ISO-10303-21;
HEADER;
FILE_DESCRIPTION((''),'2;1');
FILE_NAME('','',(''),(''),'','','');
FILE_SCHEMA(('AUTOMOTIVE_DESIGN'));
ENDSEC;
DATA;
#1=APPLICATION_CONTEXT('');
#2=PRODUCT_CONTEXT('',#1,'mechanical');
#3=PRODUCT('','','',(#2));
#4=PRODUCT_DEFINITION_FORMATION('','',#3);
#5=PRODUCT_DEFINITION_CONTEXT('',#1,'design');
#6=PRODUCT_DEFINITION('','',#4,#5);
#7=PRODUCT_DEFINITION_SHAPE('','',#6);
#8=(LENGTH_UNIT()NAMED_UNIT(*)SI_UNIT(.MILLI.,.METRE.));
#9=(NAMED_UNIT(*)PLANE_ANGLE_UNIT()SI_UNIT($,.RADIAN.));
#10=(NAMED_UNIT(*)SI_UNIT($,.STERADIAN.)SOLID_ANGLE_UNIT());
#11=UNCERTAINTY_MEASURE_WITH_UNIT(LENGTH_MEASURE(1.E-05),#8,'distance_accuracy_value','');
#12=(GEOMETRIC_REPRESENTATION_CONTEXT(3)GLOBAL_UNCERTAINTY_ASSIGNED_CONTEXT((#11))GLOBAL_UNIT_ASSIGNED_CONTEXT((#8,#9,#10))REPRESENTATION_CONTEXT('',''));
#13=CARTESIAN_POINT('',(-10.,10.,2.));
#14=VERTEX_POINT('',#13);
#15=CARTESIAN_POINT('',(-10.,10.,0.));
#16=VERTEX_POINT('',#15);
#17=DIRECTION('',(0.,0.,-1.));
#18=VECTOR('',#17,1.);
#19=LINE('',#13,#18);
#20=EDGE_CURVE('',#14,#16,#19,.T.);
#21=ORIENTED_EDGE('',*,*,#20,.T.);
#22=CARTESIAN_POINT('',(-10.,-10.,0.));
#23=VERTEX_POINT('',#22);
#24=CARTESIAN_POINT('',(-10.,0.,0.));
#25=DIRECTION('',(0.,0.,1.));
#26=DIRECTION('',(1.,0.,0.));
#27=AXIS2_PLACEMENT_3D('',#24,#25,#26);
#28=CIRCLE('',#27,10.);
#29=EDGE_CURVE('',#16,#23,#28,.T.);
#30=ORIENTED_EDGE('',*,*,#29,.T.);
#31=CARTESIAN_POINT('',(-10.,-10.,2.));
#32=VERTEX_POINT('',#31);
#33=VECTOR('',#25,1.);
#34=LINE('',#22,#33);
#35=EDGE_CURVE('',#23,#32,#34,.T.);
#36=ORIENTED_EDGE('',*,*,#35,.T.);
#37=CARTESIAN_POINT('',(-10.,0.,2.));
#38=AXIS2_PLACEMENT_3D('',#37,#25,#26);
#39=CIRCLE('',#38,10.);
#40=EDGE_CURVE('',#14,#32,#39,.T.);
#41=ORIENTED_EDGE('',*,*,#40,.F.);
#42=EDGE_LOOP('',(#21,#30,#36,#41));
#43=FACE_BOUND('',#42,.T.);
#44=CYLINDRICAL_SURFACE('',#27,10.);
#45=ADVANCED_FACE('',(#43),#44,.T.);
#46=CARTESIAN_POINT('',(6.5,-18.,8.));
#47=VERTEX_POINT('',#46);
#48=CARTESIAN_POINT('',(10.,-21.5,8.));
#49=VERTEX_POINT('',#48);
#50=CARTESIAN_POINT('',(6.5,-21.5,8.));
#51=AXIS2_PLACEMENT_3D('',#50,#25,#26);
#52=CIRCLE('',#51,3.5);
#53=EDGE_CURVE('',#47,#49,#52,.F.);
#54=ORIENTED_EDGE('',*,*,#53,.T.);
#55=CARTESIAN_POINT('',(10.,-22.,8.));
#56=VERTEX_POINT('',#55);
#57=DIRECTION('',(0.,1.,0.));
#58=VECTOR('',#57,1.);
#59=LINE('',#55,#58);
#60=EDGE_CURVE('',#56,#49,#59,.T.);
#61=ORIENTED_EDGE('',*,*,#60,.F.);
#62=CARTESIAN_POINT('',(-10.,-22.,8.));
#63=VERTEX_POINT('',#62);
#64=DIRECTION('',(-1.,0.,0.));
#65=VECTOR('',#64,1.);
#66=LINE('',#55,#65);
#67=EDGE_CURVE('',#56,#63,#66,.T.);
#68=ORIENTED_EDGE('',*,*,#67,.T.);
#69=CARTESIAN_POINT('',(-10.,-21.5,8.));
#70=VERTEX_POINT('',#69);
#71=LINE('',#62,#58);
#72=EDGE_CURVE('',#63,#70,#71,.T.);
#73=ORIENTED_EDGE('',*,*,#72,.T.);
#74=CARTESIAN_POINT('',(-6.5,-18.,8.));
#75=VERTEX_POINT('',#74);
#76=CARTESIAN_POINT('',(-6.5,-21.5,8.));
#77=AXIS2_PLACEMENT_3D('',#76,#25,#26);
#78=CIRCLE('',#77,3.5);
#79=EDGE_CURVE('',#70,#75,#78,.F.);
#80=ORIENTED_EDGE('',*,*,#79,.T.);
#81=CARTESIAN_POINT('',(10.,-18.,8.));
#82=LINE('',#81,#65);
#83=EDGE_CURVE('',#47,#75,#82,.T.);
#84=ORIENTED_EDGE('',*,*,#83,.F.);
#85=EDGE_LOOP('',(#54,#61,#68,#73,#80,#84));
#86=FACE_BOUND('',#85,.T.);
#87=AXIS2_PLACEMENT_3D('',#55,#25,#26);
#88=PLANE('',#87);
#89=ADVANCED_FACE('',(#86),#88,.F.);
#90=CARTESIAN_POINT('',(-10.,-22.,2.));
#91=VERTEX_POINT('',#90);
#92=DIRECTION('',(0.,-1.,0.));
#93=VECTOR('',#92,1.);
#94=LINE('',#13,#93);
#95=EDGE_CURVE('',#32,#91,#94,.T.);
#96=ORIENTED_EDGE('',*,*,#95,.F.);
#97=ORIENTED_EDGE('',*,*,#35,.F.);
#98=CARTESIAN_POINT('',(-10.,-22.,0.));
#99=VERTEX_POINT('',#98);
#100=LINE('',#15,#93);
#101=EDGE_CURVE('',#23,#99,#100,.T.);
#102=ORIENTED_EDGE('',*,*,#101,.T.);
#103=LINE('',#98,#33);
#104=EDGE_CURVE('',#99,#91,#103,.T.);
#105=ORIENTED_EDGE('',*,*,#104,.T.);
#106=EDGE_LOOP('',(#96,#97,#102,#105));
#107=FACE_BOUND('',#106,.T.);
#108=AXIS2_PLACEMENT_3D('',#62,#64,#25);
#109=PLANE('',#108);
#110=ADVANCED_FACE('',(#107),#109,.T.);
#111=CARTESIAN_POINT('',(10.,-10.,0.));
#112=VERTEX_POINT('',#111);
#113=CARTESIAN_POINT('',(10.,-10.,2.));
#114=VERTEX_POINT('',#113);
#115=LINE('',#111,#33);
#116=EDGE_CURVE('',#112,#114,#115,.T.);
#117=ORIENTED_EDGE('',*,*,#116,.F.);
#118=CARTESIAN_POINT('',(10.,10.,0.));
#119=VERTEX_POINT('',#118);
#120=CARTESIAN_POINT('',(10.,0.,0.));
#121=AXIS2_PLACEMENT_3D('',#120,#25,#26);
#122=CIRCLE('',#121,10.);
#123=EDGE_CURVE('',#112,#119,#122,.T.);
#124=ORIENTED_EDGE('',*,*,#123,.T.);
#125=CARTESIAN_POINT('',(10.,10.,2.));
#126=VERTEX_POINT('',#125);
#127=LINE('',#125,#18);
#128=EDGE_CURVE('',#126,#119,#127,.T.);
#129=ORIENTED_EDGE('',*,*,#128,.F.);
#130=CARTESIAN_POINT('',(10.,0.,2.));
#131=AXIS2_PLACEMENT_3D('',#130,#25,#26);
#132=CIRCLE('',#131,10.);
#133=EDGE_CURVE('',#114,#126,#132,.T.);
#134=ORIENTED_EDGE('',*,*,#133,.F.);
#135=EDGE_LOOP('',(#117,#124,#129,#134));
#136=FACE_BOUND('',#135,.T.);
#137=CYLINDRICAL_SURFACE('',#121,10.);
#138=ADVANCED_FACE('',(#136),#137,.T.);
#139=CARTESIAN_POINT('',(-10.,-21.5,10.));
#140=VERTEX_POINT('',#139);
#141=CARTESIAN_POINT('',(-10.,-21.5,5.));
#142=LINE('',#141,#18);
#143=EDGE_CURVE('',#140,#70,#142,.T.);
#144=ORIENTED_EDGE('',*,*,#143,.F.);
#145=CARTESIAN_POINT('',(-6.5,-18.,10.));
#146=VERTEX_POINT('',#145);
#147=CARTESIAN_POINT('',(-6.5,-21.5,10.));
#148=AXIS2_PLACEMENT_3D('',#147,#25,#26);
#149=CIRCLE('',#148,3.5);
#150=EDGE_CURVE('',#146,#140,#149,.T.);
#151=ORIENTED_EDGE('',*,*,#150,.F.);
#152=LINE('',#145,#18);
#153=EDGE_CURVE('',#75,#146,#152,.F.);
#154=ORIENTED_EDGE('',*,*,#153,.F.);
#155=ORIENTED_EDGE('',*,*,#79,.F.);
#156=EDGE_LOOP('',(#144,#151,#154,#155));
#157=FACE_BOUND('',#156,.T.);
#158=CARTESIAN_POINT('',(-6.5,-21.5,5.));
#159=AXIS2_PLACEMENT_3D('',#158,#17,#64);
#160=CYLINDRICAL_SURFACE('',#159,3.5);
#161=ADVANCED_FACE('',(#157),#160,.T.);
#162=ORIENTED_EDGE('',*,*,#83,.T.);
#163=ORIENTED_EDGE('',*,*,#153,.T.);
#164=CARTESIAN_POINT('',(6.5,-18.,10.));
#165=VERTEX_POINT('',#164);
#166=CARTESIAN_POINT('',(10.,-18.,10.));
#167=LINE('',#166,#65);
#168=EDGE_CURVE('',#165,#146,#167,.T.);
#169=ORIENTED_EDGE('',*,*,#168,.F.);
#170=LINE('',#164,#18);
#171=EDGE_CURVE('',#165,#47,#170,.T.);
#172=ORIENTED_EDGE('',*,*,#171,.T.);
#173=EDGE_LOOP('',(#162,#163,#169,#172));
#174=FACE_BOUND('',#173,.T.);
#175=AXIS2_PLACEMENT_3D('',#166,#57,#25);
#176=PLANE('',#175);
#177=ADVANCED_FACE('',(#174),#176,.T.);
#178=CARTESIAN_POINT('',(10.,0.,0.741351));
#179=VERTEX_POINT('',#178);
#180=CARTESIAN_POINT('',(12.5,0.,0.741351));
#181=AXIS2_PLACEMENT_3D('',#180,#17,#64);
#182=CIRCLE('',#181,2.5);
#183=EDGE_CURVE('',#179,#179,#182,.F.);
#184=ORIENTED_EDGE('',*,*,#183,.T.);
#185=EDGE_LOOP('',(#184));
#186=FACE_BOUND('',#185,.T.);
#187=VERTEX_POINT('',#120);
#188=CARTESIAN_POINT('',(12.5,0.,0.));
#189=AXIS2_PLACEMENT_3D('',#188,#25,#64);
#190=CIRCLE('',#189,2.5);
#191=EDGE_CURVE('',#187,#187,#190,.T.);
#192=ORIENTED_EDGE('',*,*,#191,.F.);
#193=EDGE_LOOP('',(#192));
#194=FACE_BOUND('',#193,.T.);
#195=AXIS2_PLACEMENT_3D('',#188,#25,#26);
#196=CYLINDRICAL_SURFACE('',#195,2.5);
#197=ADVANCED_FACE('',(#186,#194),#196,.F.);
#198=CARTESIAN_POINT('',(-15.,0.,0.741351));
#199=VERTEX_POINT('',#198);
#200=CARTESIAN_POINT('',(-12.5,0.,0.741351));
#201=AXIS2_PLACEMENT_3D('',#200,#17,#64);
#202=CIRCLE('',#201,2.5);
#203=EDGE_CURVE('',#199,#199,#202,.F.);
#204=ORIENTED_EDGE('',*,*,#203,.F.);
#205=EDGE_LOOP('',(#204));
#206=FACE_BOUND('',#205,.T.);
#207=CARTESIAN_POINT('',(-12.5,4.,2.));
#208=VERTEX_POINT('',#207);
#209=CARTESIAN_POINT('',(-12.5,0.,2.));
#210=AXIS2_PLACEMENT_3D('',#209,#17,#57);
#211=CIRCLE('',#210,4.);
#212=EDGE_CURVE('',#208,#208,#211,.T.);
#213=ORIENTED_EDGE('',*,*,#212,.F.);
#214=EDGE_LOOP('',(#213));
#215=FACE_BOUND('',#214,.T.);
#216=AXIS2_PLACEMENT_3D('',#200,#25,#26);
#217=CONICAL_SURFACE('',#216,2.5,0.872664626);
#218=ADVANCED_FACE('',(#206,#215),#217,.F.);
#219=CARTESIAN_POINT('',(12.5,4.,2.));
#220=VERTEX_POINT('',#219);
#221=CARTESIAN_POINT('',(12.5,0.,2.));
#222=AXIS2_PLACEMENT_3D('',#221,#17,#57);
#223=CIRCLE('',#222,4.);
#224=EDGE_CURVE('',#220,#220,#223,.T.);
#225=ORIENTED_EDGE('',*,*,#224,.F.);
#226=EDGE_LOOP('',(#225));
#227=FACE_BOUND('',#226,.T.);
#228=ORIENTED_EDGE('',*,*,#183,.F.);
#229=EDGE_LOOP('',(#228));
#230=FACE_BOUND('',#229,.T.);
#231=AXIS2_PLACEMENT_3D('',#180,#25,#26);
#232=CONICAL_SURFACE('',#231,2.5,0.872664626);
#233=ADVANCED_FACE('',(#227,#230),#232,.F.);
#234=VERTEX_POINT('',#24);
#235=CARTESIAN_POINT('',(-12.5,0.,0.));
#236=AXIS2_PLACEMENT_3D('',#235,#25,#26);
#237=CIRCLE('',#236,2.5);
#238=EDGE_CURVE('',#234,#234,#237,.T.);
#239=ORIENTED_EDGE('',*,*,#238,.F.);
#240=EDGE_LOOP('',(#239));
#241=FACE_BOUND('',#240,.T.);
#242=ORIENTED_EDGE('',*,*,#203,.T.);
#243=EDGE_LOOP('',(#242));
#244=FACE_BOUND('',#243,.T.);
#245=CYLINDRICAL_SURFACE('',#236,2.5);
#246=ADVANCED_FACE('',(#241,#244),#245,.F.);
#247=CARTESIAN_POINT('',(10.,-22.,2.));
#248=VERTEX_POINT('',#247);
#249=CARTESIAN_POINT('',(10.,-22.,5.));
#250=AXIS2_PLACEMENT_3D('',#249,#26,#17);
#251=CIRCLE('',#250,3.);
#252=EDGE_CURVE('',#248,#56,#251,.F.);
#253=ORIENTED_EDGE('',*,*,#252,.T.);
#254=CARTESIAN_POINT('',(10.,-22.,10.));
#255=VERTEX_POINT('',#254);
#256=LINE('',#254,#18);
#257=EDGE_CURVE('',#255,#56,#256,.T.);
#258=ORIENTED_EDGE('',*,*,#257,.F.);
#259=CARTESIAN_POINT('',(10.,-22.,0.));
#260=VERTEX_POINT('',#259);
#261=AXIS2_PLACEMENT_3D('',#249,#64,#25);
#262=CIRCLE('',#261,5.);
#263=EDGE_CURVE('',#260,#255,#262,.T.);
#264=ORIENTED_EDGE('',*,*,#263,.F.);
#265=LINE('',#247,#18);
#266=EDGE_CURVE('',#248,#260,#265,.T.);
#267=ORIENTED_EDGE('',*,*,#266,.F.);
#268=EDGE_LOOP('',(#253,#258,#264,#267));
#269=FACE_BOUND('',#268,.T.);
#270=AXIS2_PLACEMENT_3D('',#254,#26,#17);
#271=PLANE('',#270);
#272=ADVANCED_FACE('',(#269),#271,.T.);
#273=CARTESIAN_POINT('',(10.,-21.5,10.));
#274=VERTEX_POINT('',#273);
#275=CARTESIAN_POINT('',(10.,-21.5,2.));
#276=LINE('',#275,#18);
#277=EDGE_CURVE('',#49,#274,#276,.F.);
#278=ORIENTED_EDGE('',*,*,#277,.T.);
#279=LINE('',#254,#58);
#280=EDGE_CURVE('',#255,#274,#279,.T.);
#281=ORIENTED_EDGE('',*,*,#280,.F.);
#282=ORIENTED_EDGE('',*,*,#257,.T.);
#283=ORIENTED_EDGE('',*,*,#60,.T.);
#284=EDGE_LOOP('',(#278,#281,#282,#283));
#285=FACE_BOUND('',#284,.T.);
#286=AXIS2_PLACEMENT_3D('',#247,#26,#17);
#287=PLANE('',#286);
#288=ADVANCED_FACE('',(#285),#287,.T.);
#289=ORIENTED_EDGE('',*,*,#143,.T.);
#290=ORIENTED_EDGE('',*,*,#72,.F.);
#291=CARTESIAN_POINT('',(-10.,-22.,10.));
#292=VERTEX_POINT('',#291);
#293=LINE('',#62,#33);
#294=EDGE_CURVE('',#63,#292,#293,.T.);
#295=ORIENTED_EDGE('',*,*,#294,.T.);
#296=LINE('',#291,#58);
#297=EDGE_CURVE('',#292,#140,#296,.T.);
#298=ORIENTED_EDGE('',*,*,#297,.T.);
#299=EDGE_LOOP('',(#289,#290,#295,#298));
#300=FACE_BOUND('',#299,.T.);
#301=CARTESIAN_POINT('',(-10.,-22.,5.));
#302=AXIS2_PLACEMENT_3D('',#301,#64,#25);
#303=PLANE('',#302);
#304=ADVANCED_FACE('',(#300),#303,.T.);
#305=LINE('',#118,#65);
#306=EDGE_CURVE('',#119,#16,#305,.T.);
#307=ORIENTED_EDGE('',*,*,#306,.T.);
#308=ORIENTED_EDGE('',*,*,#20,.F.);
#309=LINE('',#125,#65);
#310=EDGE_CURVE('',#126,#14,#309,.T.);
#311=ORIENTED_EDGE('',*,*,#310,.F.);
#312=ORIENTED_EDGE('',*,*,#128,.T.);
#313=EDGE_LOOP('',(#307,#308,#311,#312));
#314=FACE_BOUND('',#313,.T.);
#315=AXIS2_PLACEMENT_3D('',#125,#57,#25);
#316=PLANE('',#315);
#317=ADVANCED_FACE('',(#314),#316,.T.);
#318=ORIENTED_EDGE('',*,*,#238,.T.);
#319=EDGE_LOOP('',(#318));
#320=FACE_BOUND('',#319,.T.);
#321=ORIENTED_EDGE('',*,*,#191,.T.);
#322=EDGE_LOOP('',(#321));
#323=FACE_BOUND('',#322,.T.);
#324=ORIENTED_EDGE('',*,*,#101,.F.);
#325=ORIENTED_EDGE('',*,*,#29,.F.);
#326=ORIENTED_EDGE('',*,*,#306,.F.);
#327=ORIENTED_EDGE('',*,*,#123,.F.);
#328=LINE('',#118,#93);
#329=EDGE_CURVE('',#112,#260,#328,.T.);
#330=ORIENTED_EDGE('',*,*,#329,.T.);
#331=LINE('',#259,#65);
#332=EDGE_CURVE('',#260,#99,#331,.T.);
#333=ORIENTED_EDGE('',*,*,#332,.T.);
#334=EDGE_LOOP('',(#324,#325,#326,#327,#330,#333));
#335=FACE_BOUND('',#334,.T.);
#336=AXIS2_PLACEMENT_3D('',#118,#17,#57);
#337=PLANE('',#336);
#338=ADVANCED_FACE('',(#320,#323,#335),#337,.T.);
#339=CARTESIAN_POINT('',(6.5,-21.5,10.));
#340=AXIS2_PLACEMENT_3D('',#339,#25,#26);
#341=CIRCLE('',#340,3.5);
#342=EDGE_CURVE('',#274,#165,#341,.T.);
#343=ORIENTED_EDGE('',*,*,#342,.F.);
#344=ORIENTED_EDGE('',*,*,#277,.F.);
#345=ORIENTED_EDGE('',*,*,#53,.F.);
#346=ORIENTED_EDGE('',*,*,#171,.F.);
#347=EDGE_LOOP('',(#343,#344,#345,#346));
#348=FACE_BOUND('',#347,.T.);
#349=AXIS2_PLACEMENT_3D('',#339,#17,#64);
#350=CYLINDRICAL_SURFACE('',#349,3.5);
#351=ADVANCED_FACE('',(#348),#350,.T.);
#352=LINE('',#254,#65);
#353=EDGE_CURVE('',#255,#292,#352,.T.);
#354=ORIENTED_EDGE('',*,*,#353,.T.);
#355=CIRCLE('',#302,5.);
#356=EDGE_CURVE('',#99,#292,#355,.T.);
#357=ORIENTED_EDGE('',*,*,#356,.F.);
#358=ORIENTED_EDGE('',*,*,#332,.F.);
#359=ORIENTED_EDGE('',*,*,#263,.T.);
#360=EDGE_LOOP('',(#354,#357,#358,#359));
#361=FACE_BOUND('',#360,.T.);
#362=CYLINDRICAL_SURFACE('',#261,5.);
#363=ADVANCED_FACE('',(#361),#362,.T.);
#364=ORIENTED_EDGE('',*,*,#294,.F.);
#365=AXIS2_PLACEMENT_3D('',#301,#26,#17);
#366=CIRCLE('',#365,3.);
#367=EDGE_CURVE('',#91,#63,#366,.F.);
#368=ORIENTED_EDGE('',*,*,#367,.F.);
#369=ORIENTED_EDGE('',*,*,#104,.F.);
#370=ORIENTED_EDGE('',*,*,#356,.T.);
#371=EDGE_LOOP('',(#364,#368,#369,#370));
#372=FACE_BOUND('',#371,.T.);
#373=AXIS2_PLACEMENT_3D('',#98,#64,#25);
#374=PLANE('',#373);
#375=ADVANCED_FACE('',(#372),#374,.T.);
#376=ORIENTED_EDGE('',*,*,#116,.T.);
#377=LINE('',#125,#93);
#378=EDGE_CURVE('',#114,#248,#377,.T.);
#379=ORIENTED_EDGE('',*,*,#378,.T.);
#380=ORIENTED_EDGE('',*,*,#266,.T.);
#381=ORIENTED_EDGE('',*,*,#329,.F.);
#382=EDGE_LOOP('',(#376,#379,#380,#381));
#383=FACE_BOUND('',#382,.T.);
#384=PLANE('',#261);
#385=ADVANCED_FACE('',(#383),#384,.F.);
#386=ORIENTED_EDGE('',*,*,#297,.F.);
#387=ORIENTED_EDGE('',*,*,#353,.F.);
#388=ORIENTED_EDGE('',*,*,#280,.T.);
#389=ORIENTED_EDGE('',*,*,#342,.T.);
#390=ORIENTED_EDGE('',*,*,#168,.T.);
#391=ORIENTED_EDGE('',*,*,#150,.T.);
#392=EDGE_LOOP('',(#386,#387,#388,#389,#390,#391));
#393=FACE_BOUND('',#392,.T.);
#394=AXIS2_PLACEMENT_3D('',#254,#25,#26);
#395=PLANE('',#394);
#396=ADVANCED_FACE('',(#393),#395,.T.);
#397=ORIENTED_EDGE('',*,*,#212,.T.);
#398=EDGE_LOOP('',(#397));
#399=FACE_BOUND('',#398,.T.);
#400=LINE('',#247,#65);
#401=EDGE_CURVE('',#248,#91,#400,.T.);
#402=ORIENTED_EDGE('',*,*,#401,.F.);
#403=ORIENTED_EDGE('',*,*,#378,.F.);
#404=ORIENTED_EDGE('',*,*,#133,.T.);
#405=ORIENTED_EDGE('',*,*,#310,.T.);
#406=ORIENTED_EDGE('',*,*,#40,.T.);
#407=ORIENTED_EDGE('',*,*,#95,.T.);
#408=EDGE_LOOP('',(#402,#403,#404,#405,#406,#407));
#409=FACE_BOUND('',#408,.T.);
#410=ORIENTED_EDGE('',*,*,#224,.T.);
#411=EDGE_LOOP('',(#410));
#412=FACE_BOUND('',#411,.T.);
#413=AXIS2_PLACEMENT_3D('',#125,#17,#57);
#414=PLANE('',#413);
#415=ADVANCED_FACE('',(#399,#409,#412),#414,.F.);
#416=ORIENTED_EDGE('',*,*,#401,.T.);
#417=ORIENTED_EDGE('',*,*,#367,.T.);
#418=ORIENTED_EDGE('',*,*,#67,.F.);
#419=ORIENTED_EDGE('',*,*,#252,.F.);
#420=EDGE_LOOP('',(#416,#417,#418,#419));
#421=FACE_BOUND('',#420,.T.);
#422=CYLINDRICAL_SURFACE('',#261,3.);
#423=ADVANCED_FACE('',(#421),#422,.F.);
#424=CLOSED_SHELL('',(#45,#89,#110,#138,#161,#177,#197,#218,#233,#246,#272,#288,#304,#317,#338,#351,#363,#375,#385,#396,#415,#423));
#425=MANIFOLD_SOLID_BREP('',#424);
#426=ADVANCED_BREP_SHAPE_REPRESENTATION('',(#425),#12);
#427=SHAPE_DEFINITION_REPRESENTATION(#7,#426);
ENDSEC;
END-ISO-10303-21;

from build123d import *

# Parameters (mm, degrees)
T_LE_DE_BASE_PLI_E1_DEPTH = 10
PATTE1_DEPTH              = 2
ESQUISSE9_R               = 2.5
ENL_V_MAT_EXTRU_1_DEPTH   = 35.539832078
CHANFREIN1_SIZE           = 1.5
CHANFREIN1_SIZE2          = 1.258649447
CONG_1_R                  = 3.5


# Sheet-metal steps are written as plain solids
with BuildPart() as part:
    # Esquisse1 → Tôle de base pliée1 (new, symmetric)
    with BuildSketch(Plane(origin=(0, 0, 0), x_dir=(0, 0, -1), z_dir=(1, 0, 0))):
        with BuildLine():
            Line((0, 10), (0, -22))
            ThreePointArc((0, -22), (-5, -27), (-10, -22))
            Line((-10, -22), (-10, -18))
            Line((-10, -18), (-8, -18))
            Line((-8, -18), (-8, -22))
            ThreePointArc((-8, -22), (-5, -25), (-2, -22))
            Line((-2, -22), (-2, 10))
            Line((-2, 10), (0, 10))
        make_face()
    extrude(amount=T_LE_DE_BASE_PLI_E1_DEPTH, both=True)

    # Esquisse6 → Patte1 (add)
    with BuildSketch(Plane.XY.offset(2)):
        with BuildLine():
            Line((-10, 10), (10, 10))
            ThreePointArc((10, 10), (20, 0), (10, -10))
            Line((10, -10), (-10, -10))
            ThreePointArc((-10, -10), (-20, 0), (-10, 10))
        make_face()
    extrude(amount=-PATTE1_DEPTH)

    # Esquisse9 → Enlèv. mat.-Extru.1 (cut, through all)
    with BuildSketch(Plane.XY.offset(2)):
        with Locations((-12.5, 0)):
            Circle(ESQUISSE9_R)
        with Locations(Location((12.5, 0, 0), (0, 0, 180))):
            Circle(ESQUISSE9_R)
    extrude(amount=-ENL_V_MAT_EXTRU_1_DEPTH, mode=Mode.SUBTRACT)

    # Chanfrein1
    chanfrein1_edges = [part.edges().sort_by_distance(p)[0] for p in [
        (-15, 0, 2),
        (15, 0, 2),
    ]]
    chanfrein1_side = [part.faces().sort_by_distance(p)[0] for p in [
        (0, -4.197228845, 2),
    ]]
    chamfer(chanfrein1_edges, length=CHANFREIN1_SIZE, length2=CHANFREIN1_SIZE2, reference=chanfrein1_side[0])

    # Congé1
    cong_1_edges = [part.edges().sort_by_distance(p)[0] for p in [
        (10, -18, 9),
        (-10, -18, 9),
    ]]
    fillet(cong_1_edges, radius=CONG_1_R)


solid = part.part
